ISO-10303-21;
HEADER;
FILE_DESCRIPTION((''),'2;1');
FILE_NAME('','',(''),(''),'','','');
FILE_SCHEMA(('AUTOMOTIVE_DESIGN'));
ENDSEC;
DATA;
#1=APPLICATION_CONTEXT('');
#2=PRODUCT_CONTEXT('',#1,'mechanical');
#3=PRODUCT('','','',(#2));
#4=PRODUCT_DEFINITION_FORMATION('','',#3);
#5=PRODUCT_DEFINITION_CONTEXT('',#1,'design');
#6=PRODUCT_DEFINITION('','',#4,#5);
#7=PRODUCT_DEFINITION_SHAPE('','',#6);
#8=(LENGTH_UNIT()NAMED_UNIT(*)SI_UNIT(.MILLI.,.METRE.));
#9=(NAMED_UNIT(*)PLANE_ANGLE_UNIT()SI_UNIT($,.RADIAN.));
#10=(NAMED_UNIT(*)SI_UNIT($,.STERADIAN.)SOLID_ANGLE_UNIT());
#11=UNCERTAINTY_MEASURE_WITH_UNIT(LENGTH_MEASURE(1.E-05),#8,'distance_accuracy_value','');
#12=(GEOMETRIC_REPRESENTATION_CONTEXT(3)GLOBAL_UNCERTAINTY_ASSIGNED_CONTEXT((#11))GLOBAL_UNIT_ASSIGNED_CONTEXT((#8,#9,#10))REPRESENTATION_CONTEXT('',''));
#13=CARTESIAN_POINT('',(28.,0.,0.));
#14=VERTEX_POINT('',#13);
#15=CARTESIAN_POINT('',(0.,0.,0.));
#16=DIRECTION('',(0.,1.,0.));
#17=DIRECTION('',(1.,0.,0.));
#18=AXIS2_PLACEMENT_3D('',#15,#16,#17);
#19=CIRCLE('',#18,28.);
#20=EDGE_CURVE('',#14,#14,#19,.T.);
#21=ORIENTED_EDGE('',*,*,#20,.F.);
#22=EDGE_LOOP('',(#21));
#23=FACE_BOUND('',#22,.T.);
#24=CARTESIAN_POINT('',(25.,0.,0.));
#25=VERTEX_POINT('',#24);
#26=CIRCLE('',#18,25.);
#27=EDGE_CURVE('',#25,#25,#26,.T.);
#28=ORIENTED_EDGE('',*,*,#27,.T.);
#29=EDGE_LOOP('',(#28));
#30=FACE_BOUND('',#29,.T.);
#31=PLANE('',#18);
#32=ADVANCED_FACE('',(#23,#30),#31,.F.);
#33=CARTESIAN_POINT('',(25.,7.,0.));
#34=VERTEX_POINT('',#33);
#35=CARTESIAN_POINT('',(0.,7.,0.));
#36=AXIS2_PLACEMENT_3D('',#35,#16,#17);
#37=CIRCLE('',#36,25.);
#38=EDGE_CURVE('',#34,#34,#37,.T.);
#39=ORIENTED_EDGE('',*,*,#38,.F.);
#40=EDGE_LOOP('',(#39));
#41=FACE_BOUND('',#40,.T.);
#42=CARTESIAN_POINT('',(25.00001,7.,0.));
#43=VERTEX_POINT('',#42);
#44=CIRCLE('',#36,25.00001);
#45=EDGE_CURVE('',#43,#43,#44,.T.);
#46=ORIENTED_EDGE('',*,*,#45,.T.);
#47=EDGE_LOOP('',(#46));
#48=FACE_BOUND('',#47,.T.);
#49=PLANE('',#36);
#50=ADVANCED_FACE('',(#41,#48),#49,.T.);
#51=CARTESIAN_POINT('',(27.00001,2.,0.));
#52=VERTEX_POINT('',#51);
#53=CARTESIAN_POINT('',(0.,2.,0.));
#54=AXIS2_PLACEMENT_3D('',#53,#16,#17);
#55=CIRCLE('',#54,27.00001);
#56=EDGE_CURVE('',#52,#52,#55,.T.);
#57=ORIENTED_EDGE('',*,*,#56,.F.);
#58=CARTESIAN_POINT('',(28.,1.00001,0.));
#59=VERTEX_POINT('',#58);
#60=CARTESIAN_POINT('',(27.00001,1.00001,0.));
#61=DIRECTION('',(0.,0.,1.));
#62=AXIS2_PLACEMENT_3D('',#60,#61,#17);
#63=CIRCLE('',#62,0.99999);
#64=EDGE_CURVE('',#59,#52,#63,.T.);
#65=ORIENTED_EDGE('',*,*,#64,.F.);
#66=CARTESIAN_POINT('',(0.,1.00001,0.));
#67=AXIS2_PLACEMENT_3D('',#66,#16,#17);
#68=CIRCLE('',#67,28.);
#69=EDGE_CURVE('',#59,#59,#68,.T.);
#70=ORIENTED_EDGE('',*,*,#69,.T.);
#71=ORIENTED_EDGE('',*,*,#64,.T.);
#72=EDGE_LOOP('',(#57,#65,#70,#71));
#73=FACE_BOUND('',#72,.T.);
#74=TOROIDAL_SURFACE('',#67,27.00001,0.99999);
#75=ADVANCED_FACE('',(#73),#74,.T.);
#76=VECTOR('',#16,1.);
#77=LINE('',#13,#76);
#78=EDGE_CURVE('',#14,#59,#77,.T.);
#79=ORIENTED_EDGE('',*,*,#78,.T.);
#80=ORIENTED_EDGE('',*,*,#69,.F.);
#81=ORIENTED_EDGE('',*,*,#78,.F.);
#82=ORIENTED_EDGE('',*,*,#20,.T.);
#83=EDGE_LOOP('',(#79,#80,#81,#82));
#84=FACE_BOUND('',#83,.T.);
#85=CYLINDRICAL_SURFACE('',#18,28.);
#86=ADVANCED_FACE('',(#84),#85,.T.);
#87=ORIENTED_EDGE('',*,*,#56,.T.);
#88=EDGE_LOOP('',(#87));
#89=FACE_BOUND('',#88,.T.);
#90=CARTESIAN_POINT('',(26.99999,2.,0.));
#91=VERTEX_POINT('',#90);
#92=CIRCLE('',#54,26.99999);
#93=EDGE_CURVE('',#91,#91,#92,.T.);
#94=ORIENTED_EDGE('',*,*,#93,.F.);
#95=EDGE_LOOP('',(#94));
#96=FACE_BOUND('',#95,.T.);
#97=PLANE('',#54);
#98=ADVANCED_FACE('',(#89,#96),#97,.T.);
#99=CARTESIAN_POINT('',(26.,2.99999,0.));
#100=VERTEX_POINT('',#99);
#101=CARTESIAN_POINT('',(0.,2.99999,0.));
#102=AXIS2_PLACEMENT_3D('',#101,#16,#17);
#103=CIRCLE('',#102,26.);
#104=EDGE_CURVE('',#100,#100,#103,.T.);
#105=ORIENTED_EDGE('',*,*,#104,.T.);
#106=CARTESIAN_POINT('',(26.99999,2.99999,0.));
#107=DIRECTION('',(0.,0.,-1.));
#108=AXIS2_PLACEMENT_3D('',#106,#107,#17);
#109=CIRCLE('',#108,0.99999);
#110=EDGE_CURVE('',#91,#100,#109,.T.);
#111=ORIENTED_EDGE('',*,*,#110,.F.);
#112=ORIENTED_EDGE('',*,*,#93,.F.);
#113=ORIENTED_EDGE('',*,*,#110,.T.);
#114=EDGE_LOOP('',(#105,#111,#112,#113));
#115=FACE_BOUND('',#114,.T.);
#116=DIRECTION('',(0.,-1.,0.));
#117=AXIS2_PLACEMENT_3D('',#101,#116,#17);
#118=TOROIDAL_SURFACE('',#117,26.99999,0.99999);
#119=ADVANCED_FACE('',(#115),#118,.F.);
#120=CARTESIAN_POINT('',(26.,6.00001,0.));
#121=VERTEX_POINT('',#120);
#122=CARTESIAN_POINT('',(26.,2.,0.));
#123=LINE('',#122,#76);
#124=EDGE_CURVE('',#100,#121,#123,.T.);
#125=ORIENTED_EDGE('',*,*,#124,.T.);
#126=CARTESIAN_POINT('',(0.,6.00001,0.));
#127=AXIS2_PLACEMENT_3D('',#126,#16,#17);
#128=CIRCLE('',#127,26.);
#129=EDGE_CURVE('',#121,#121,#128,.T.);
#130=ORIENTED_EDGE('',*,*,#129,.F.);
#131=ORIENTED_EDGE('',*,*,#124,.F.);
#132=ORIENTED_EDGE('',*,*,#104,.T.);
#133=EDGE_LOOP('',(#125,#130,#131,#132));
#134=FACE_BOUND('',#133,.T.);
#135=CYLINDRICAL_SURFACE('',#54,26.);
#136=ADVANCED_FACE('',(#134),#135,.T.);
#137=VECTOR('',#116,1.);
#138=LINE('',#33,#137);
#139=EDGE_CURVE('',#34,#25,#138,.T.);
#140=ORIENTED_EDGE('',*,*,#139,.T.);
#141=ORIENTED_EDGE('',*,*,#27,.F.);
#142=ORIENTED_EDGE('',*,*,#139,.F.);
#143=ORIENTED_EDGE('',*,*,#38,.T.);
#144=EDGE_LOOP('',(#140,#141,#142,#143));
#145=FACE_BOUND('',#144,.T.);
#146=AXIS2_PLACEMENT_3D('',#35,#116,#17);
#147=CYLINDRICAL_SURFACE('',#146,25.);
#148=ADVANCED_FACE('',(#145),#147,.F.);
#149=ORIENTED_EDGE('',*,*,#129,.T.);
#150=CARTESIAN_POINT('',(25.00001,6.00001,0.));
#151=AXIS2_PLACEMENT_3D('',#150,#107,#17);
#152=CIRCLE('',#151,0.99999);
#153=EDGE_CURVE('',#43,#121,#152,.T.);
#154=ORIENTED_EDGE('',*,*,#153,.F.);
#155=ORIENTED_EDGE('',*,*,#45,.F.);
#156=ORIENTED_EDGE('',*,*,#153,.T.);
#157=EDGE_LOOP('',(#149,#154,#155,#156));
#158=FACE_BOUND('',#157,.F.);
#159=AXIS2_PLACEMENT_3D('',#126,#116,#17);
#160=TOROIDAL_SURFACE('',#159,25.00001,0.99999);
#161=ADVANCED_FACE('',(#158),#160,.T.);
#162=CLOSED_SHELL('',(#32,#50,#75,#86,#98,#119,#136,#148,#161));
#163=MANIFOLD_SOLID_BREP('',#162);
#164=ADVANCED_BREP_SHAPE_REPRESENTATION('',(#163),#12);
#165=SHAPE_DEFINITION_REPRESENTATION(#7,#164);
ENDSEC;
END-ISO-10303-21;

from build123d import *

# Parameters (mm, degrees)
F2_R = 0.99999
F3_R = 0.99999


# Not quite as in the source:
# - a fillet or chamfer is up to 0.001 mm smaller than in the source, because OpenCascade refuses the exact size


with BuildPart() as f1:
    # F0 (on Top) → F1 (revolve)
    with BuildSketch(Plane.XY):
        Polygon((25, 7), (25, 0), (28, 0), (28, 2), (26, 2), (26, 7), align=None)
    revolve(axis=Axis((0, 6.8999978745, 0), (0, 1, 0)))

    # F2 (radius 1 in the source; OpenCascade refuses exactly that, so slightly less here)
    f2_edges = [f1.edges().sort_by_distance(p)[0] for p in [
        (-26, 2, 0),
        (-28, 2, 0),
    ]]
    fillet(f2_edges, radius=F2_R)

    # F3 (radius 1 in the source; OpenCascade refuses exactly that, so slightly less here)
    f3_edges = [f1.edges().sort_by_distance(p)[0] for p in [
        (-26, 7, 0),
    ]]
    fillet(f3_edges, radius=F3_R)


solid = f1.part
